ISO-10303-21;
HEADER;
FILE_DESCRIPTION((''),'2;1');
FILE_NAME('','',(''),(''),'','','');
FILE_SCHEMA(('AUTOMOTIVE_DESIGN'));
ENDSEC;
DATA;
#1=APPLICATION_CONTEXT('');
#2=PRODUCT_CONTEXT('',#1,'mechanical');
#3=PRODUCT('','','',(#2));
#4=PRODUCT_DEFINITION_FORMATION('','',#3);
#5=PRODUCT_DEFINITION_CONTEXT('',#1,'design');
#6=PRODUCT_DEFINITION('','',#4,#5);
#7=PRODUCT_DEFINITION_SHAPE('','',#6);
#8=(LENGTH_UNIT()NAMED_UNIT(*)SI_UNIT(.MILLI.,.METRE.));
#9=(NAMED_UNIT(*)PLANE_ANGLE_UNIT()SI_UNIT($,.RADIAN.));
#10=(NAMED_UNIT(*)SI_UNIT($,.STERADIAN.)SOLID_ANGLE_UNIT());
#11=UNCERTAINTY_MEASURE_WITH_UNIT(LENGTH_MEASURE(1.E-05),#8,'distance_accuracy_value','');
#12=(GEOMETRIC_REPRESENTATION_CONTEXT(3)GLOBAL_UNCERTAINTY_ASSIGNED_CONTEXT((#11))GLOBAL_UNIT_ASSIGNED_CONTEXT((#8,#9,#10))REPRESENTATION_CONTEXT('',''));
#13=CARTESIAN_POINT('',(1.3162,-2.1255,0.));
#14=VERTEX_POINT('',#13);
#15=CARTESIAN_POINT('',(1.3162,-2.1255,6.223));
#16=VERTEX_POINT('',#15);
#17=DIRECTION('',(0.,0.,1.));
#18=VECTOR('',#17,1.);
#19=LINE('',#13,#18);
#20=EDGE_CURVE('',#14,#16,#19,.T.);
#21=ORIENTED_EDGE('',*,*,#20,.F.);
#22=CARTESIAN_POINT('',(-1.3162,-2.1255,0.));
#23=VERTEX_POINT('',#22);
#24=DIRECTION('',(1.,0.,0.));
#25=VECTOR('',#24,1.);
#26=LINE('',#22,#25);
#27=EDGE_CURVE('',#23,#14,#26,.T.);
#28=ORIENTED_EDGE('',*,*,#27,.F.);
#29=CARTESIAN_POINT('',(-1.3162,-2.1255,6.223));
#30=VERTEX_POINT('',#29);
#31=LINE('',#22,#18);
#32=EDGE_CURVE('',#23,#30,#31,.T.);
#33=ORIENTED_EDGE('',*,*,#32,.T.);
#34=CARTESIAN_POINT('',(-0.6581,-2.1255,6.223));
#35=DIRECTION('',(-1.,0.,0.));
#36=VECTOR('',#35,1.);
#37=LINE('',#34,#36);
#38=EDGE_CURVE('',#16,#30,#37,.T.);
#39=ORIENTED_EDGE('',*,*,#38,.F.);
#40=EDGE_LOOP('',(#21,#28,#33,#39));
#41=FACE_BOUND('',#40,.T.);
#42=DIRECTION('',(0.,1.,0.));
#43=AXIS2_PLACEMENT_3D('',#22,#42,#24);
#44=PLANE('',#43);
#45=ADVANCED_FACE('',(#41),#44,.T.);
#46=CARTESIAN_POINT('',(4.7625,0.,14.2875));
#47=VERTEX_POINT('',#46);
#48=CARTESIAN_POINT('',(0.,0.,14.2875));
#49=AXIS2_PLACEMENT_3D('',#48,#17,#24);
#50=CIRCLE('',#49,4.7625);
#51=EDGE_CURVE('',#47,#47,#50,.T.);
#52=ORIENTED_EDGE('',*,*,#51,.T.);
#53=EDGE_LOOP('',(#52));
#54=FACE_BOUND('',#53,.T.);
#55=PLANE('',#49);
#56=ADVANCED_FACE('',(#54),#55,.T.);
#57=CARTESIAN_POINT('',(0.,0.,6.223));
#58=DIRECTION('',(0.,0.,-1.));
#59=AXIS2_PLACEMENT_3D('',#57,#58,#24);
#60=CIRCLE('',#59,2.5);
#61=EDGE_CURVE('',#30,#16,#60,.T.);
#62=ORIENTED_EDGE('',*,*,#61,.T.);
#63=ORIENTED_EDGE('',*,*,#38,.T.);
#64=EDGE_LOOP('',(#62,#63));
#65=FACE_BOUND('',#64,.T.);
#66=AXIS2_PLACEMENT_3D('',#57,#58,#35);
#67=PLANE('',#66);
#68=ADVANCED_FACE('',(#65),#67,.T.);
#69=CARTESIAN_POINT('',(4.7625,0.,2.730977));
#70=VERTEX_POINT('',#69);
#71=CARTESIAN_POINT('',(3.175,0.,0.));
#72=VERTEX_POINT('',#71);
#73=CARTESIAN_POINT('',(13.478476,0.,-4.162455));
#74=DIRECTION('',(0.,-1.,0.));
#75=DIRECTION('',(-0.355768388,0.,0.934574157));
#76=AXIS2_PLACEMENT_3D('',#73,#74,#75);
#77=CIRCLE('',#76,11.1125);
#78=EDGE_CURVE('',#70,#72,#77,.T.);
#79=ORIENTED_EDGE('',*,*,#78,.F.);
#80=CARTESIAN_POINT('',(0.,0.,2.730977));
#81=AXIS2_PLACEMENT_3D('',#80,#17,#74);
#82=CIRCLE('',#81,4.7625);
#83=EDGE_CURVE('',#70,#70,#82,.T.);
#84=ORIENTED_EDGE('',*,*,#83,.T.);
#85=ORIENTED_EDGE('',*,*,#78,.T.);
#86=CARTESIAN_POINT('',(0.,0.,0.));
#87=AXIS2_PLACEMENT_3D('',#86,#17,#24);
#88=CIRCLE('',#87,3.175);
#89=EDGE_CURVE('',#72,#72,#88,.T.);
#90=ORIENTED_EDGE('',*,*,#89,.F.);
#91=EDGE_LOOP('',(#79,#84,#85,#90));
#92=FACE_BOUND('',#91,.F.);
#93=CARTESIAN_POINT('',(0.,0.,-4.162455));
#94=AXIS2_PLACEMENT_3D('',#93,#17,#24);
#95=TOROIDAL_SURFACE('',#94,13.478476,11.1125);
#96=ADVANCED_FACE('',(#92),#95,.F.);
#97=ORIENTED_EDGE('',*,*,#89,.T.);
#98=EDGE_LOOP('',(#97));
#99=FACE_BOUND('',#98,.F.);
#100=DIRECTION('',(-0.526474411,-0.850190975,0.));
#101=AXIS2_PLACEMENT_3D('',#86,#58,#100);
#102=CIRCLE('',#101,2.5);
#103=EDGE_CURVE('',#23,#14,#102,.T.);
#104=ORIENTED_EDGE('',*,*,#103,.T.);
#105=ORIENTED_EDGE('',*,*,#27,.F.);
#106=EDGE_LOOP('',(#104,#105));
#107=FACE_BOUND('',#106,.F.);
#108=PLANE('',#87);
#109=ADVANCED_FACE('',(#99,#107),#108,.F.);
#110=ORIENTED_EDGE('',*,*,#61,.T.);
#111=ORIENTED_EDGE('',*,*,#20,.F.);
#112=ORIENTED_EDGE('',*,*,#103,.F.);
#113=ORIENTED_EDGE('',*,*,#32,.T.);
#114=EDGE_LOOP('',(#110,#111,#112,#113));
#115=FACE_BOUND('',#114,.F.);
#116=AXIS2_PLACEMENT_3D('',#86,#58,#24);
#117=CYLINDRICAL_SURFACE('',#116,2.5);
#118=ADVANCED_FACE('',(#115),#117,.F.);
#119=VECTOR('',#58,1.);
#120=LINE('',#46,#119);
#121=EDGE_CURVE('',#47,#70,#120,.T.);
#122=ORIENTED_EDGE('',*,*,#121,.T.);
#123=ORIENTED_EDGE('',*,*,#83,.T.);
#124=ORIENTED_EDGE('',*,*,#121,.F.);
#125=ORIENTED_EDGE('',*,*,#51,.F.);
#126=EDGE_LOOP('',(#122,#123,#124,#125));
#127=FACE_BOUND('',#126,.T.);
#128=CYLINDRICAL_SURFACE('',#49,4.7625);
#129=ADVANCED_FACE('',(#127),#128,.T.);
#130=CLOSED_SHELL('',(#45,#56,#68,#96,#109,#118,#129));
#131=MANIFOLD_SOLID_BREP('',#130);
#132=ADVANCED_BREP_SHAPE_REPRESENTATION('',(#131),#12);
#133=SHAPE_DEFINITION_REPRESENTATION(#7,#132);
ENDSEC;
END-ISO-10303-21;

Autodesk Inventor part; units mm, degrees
ref_plane "YZ Plane" through (0, 0, 0) normal (1, 0, 0) x (0, 1, 0)
ref_plane "XZ Plane" through (0, 0, 0) normal (0, 1, 0) x (-1, 0, 0)
ref_plane "XY Plane" through (0, 0, 0) normal (0, 0, 1) x (1, 0, 0)
sketch "Sketch1" plane through (0, 0, 0) normal (0, 0, 1) x (1, 0, 0)
  circle A0 centre (0, 0) radius 2.5
  line L0 (-1.3162, -2.1255) -> (1.3162, -2.1255)
  circle A1 centre (0, 0) radius 3.175
  dimension "d0" = 5
  dimension "d1" = 6.35
extrude "Extrusion1" add sketch "Sketch1" along normal blind 6.35 contours L0 A0 | A1 picked at (-0.2721, -2.2046)
sketch "Sketch2" plane through (0, 0, 6.35) normal (0, 0, 1) x (1, 0, 0)
  circle A0 centre (0, 0) radius 9.525
  circle A1 centre (0, 0) radius 10.8857
  dimension "d4" = 19.05
  dimension "d5" = 21.7714
extrude "Extrusion2" add sketch "Sketch2" along normal blind 6.35
sketch "Sketch4" plane through (0, 0, 12.7) normal (0, 0, 1) x (1, 0, 0)
  circle A0 centre (0, 0) radius 10.8857 projected
  circle A1 centre (0, 0) radius 9.525 projected
extrude "Extrusion4" add sketch "Sketch4" along normal blind 1.5875 contours A1
sketch "Sketch5" plane through (0, 0, 12.7) normal (0, 0, 1) x (1, 0, 0)
  circle A0 centre (0, 0) radius 10.8857 projected
  circle A1 centre (0, 0) radius 9.525 projected
extrude "Extrusion5" cut sketch "Sketch5" against normal blind 9.525
sketch "Sketch6" plane through (0, 0, 12.7) normal (0, 0, -1) x (-1, 0, 0)
  circle A0 centre (0, 0) radius 9.525 projected
extrude "Extrusion6" add sketch "Sketch6" along normal blind 6.477
fillet "Fillet2" radius 11.1125 1 edges at (-3.175, 0, 6.223)
sketch "Sketch7" plane through (0, 0, 14.2875) normal (0, 0, 1) x (1, 0, 0)
  circle A0 centre (0, 0) radius 9.525 projected
  circle A1 centre (0, 0) radius 4.7625
  dimension "d18" = 9.525
extrude "Extrusion7" cut sketch "Sketch7" against normal blind 15.748
properties part number "Shaft Adapter"
